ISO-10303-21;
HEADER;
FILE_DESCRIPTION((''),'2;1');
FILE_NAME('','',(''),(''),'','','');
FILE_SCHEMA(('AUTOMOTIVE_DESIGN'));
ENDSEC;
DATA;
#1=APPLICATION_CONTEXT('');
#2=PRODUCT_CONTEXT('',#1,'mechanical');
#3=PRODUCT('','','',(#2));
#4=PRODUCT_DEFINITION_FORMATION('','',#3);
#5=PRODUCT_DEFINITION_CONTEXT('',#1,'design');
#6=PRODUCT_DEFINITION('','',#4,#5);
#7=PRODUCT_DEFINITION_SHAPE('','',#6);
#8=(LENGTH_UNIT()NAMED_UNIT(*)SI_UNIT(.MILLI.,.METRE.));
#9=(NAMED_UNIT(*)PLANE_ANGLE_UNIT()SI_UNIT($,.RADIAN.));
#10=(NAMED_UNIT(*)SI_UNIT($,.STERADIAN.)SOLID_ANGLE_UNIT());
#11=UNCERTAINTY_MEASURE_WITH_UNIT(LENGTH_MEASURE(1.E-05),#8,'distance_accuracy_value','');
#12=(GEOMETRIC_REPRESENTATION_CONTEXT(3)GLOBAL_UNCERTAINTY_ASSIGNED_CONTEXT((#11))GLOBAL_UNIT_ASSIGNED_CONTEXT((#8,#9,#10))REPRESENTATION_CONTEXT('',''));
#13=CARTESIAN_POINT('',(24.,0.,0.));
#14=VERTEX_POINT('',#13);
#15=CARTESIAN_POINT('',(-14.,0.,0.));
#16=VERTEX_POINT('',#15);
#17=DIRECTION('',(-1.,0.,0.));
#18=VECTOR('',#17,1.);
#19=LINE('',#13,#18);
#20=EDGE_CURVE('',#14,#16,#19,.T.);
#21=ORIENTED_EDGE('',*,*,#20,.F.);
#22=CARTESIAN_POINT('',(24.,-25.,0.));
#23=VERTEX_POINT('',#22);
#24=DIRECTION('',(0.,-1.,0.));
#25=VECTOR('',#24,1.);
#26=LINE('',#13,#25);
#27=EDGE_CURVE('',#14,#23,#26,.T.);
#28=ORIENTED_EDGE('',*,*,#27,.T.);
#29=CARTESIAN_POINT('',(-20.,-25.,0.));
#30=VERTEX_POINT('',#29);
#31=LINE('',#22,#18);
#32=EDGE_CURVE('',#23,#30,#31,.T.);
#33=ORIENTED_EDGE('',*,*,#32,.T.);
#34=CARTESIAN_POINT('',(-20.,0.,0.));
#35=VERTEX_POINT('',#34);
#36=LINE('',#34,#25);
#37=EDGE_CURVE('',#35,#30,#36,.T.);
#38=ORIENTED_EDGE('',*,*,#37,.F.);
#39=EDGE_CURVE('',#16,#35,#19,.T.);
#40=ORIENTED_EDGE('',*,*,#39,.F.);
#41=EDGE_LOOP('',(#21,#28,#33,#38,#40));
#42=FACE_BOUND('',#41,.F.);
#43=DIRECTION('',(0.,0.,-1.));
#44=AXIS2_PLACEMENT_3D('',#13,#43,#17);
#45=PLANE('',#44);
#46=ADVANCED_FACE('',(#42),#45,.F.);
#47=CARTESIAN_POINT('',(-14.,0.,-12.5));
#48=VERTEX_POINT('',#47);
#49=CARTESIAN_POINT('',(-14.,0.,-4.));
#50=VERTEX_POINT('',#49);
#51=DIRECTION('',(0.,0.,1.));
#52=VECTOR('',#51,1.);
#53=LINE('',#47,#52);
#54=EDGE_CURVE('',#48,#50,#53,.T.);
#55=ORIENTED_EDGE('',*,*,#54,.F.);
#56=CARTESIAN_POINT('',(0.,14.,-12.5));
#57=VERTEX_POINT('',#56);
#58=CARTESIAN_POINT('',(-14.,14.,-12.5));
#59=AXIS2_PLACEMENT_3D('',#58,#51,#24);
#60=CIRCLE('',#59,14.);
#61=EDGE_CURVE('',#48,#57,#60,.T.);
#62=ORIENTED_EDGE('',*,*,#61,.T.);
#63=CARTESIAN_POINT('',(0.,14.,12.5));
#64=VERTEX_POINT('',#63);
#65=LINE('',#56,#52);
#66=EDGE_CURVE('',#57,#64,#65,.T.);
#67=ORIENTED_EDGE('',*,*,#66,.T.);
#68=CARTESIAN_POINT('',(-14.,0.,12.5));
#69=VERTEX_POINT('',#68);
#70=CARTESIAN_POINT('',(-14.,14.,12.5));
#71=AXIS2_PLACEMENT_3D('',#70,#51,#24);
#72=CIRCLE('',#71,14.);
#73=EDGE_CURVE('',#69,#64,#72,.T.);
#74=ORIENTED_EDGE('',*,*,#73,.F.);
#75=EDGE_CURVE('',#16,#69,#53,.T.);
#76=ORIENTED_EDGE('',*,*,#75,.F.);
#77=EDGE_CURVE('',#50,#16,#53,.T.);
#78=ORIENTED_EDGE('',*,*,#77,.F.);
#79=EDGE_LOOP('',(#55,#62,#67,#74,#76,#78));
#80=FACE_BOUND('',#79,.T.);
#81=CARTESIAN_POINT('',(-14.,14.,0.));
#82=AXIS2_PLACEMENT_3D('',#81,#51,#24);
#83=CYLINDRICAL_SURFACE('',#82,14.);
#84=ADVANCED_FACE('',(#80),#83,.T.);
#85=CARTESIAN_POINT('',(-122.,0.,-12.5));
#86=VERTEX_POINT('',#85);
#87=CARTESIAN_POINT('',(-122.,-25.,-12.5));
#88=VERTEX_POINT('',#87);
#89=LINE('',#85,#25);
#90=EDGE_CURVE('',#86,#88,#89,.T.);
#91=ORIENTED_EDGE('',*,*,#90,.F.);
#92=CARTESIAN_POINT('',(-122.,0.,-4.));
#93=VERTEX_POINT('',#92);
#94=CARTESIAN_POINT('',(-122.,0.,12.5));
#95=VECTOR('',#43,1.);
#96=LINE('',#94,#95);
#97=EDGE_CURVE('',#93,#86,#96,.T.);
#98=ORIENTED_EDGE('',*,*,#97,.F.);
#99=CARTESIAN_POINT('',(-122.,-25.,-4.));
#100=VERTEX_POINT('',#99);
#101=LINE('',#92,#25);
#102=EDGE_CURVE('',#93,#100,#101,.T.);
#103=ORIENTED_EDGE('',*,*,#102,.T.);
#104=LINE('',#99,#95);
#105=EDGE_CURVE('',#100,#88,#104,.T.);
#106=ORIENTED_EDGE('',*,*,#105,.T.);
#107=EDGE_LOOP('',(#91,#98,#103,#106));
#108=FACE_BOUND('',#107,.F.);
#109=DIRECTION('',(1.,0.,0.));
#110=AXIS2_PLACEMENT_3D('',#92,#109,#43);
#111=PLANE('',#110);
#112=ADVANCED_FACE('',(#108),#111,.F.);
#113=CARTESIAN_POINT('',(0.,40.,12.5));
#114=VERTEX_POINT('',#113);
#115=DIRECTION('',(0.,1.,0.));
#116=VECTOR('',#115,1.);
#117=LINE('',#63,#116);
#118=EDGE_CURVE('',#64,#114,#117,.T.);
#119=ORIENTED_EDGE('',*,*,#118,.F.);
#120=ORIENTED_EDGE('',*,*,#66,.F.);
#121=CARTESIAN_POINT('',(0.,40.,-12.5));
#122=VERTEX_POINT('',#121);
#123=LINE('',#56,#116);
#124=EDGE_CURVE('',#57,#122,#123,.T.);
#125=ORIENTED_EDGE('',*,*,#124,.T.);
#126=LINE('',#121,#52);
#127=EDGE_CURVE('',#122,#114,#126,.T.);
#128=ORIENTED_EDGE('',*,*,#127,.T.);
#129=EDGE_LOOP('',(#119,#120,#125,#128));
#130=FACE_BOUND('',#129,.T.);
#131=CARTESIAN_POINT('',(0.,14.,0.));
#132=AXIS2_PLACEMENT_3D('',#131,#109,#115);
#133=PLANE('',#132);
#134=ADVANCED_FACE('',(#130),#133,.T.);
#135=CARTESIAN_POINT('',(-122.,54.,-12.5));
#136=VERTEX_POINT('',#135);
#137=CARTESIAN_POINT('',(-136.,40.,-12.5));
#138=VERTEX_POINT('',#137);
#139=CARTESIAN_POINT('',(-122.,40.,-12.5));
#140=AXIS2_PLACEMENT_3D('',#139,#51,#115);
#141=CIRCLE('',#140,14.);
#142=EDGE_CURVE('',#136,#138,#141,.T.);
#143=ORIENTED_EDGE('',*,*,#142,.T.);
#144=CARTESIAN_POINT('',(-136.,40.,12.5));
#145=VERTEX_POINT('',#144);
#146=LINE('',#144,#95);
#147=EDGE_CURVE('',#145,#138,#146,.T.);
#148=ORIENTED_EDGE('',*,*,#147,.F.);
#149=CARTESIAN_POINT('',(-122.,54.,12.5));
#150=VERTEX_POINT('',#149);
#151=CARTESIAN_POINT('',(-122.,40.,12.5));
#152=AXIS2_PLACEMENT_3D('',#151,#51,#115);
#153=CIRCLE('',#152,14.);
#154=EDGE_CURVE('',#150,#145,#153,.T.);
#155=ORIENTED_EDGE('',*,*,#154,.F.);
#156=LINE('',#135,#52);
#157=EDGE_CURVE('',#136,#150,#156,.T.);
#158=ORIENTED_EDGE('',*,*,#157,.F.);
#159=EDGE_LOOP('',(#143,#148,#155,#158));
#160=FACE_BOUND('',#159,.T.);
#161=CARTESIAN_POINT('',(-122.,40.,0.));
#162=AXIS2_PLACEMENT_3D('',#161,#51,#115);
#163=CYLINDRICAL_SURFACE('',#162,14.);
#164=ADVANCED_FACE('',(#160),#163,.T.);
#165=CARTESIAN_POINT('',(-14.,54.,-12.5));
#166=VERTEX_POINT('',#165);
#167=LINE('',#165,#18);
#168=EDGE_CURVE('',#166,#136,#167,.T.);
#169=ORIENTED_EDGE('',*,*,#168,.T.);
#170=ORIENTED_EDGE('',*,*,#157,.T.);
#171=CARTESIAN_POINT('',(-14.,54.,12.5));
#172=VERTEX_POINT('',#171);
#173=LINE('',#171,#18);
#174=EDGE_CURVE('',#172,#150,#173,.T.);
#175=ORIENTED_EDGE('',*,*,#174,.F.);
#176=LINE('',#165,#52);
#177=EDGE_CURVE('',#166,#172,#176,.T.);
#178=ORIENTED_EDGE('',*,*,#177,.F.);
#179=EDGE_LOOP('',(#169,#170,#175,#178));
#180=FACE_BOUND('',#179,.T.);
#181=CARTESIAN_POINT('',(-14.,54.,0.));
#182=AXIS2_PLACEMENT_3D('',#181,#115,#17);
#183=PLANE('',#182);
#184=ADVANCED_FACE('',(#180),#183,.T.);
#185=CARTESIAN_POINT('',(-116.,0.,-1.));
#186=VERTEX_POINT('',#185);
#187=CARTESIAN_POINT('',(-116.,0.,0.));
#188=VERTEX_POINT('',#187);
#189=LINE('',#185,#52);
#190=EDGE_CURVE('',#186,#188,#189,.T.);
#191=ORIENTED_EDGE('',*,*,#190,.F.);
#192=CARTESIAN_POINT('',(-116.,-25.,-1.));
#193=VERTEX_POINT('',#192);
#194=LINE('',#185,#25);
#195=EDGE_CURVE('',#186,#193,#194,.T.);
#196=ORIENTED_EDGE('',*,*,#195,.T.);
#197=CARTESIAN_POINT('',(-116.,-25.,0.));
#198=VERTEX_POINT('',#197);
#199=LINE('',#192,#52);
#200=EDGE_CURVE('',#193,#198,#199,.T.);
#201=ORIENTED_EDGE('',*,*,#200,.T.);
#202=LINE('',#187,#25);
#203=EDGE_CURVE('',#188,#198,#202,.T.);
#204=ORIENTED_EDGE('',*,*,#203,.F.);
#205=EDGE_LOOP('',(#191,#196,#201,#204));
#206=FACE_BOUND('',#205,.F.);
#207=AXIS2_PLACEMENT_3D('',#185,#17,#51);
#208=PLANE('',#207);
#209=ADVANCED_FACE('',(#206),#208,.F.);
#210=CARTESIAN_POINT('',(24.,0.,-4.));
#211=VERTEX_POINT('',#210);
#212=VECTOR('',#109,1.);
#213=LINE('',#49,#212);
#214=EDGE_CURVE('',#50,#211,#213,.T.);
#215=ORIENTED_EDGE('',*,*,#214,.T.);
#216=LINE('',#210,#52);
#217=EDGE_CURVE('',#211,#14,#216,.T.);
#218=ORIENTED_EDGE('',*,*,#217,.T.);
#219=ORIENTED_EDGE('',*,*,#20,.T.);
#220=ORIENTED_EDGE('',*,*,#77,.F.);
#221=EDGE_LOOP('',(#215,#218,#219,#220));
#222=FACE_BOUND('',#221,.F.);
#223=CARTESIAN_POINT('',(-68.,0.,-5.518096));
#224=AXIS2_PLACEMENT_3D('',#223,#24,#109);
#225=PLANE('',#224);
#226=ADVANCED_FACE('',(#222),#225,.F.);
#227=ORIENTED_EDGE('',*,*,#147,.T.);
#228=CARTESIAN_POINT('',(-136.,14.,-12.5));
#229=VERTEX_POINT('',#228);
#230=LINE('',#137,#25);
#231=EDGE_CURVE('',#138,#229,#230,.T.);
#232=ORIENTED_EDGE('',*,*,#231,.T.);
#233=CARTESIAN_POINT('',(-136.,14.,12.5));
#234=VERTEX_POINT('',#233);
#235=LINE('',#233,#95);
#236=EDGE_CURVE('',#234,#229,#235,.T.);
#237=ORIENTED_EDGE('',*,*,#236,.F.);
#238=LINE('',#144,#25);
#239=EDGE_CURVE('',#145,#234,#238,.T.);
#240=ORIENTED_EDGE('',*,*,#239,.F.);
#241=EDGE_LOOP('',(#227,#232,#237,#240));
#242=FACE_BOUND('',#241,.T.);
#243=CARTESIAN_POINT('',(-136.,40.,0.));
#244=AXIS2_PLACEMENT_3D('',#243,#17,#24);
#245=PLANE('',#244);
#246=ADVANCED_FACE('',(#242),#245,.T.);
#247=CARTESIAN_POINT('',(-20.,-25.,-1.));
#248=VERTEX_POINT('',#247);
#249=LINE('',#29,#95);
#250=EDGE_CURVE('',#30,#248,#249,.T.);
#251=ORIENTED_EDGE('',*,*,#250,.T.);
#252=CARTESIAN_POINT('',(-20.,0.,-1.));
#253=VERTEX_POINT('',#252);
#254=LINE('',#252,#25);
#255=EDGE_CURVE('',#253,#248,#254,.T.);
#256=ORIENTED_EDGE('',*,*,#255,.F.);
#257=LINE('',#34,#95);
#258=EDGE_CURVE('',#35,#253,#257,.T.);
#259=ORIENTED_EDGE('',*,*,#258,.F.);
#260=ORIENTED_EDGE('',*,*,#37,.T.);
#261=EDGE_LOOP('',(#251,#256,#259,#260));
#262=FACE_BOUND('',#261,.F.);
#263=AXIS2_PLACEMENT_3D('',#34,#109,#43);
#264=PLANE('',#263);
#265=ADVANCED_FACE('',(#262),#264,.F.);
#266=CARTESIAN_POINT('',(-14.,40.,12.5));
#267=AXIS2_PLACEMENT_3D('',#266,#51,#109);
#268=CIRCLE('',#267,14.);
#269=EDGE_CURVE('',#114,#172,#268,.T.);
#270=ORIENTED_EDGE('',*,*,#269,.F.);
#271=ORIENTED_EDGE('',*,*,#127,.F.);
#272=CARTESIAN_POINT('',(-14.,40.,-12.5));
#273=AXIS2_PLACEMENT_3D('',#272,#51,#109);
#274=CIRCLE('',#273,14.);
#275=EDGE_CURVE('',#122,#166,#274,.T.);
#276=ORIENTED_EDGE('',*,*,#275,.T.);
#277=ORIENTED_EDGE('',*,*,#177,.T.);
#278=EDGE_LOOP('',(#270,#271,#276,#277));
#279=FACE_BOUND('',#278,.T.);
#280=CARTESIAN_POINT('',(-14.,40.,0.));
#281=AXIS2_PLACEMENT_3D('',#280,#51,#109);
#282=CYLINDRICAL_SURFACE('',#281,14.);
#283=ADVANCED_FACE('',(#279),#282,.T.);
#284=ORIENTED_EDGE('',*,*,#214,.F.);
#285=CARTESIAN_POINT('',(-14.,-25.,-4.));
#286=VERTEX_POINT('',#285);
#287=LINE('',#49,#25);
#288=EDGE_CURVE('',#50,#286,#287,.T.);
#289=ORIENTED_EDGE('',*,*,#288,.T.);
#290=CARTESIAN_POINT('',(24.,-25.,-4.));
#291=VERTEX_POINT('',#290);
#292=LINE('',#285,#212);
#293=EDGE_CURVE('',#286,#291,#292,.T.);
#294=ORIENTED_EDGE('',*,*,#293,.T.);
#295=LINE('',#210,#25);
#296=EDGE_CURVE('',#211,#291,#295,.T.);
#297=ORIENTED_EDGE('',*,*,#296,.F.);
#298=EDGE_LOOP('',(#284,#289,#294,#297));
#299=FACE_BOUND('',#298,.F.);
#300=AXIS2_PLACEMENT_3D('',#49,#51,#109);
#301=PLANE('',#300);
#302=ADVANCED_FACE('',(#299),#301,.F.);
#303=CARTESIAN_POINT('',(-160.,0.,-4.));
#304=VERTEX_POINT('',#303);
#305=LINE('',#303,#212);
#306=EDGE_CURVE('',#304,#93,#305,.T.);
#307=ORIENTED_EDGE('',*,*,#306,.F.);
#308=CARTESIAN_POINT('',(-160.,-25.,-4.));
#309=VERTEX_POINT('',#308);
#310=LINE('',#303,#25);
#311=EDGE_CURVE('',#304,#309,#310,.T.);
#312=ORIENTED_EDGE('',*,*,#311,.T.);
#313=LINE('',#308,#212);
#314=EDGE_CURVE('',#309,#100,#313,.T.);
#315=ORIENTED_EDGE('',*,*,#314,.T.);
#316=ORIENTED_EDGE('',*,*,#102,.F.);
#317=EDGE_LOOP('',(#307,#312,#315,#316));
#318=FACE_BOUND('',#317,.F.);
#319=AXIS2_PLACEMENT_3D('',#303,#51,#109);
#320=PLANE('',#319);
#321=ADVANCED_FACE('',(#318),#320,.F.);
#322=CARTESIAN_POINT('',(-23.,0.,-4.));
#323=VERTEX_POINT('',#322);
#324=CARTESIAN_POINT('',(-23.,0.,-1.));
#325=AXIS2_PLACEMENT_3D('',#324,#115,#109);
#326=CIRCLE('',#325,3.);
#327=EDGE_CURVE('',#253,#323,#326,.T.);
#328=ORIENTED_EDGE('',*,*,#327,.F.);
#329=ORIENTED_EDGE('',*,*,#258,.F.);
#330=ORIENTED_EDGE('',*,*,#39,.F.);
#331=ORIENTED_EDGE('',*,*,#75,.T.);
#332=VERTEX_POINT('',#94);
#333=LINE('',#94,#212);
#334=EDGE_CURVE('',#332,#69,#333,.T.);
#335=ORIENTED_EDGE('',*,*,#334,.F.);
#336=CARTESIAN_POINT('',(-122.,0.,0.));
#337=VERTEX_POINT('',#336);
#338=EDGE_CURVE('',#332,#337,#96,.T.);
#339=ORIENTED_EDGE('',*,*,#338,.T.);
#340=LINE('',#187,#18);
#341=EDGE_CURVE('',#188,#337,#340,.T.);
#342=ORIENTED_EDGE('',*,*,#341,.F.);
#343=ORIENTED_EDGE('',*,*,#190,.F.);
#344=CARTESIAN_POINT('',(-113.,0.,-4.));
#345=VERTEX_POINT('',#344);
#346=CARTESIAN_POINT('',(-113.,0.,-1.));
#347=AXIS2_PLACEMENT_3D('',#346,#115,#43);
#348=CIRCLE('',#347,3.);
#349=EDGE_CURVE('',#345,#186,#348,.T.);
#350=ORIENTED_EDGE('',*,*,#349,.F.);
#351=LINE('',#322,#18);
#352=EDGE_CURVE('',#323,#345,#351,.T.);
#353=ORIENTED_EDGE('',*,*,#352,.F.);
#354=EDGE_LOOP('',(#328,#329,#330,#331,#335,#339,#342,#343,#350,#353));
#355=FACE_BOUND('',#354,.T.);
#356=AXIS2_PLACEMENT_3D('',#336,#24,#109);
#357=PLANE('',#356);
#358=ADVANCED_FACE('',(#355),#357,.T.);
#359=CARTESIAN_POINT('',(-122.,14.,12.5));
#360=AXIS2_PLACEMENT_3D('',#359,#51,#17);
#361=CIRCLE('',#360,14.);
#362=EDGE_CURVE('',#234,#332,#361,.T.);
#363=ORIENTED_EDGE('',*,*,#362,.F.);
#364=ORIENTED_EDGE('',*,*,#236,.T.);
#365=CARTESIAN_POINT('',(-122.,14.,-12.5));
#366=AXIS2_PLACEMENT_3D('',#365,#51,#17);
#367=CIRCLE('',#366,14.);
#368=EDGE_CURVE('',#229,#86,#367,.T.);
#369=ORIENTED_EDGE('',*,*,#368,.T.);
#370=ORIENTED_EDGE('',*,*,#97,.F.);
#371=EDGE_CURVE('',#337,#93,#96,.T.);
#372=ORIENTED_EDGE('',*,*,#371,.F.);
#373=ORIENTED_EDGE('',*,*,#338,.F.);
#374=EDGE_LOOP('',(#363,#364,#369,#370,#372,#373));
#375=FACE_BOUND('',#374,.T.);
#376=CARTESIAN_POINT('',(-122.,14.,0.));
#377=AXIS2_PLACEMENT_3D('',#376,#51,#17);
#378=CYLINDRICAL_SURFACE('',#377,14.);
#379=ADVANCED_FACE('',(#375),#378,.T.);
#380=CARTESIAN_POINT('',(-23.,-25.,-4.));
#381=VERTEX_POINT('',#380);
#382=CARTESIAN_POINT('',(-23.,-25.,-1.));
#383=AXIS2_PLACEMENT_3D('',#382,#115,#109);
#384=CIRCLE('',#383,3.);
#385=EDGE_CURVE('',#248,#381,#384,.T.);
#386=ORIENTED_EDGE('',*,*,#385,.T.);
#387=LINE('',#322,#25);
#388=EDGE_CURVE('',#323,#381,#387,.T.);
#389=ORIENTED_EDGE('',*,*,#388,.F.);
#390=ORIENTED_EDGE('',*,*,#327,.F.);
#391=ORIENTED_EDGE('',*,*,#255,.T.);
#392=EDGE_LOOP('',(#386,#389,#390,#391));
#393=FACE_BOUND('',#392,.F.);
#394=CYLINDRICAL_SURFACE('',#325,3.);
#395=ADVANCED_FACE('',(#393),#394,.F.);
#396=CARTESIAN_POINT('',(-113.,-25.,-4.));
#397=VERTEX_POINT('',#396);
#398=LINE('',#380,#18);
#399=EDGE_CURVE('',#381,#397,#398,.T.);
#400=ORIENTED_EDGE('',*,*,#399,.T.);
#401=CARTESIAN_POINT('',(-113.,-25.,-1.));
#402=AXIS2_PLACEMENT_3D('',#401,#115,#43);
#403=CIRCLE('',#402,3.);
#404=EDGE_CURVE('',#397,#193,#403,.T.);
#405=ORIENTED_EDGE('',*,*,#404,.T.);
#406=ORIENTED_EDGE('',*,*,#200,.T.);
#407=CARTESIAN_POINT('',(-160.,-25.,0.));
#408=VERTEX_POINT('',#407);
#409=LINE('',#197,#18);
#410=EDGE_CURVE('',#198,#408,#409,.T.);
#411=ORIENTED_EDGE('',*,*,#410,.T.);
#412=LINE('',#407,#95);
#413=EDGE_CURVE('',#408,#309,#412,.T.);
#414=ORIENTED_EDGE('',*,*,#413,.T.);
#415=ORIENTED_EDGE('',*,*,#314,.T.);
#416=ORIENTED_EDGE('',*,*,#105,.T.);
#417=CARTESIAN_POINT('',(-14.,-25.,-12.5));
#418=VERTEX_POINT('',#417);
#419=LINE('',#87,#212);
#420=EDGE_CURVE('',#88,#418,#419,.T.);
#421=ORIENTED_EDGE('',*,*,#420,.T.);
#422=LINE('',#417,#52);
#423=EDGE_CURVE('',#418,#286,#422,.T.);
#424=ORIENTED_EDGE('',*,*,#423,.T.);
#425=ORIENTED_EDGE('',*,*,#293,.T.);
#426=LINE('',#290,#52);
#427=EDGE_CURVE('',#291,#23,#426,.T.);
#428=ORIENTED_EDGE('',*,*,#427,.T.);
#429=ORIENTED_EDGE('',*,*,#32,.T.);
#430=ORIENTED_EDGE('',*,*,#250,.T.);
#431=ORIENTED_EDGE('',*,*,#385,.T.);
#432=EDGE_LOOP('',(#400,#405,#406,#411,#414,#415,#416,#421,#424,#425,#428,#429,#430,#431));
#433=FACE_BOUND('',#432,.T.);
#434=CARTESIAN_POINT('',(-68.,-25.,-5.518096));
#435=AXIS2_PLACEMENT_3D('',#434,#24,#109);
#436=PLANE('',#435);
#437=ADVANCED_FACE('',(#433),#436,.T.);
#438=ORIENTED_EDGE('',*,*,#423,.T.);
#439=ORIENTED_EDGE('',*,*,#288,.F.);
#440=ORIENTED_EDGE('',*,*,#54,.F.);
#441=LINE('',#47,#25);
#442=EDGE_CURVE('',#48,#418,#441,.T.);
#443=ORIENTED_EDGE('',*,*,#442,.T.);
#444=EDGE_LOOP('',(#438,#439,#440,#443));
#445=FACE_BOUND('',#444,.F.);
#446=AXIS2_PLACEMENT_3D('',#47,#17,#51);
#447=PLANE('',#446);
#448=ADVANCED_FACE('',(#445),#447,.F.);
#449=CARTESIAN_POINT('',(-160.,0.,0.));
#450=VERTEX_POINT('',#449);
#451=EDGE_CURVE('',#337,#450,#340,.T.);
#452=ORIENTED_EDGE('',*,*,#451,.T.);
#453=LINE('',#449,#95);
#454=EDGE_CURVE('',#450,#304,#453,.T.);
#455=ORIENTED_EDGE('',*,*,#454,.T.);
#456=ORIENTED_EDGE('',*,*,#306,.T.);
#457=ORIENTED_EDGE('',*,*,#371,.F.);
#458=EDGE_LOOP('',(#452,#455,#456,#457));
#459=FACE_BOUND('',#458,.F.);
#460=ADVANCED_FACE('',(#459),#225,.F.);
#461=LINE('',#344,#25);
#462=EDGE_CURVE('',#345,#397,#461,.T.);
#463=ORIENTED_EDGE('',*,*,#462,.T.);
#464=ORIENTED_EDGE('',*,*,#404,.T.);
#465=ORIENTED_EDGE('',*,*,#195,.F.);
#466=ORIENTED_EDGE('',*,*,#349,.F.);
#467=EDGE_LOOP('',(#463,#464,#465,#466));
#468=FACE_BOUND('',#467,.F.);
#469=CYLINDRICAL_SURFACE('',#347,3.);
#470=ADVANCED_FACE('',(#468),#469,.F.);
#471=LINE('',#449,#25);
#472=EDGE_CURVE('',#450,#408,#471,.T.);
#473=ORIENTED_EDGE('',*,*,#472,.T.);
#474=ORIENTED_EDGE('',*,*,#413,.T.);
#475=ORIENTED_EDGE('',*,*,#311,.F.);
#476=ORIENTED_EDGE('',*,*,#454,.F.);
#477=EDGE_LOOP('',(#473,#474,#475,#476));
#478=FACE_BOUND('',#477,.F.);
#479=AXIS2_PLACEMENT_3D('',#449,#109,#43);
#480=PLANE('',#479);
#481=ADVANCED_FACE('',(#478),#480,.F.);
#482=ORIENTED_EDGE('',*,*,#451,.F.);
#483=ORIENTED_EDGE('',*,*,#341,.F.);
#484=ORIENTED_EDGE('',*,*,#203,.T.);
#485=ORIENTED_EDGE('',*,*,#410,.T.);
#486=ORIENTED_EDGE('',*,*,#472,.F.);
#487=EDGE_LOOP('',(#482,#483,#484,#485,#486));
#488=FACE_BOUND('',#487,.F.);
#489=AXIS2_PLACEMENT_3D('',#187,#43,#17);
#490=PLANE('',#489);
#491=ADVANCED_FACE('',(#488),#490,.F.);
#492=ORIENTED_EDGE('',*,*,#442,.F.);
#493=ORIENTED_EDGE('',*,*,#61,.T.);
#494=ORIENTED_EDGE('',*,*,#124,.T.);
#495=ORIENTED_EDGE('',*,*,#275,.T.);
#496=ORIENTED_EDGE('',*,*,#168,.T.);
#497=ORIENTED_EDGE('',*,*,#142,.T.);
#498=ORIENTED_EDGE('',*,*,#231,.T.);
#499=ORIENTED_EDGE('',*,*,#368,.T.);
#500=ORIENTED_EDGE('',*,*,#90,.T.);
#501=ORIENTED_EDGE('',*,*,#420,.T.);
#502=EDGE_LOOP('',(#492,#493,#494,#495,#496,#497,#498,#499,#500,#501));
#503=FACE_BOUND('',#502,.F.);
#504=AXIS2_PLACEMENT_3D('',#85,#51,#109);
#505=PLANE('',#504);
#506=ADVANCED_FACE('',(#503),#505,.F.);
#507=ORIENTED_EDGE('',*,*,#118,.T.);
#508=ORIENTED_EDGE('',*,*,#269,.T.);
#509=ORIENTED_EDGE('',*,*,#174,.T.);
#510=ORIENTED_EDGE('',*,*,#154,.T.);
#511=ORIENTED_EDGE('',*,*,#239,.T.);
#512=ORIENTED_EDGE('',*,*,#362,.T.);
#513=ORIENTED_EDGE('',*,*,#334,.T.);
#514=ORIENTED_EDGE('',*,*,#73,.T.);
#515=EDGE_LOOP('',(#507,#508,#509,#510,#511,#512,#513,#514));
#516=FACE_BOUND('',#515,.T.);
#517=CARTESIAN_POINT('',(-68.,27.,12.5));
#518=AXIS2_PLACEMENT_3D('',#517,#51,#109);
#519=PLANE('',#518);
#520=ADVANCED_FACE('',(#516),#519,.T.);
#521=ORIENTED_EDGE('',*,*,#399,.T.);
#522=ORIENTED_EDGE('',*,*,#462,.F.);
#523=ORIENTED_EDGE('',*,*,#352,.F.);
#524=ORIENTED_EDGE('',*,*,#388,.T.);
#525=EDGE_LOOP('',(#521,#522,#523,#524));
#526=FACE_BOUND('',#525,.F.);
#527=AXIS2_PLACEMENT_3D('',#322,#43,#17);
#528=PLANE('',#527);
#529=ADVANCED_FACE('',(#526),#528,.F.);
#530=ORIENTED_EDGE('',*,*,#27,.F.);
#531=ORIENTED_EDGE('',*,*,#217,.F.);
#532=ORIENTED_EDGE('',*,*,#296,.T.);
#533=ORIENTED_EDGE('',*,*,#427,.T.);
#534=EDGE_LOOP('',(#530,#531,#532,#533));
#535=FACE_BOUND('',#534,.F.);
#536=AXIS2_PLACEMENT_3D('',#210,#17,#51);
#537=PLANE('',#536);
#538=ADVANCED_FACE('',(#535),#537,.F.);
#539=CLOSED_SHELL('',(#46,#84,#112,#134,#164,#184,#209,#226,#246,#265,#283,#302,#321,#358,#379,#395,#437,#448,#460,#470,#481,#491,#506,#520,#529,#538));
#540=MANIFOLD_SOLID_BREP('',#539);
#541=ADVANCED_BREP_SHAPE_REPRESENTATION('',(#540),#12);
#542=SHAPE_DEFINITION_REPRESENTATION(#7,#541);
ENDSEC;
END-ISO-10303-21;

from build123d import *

# Parameters (mm, degrees)
F1_DEPTH = 12.5
F5_DEPTH = 25


# Not quite as in the source:
# - the program builds the solid bodies; features that only make, move or delete a surface that nothing else refers to are left out


with BuildPart() as f1:
    # F0 (on Top) → F1 (new body, symmetric)
    with BuildSketch(Plane.XY):
        with BuildLine():
            Line((-122, 0), (-14, 0))
            ThreePointArc((-14, 0), (-4.1005050634, 4.1005050634), (0, 14))
            Line((0, 14), (0, 40))
            ThreePointArc((0, 40), (-4.1005050634, 49.8994949366), (-14, 54))
            Line((-14, 54), (-122, 54))
            ThreePointArc((-122, 54), (-131.8994949366, 49.8994949366), (-136, 40))
            Line((-136, 40), (-136, 14))
            ThreePointArc((-136, 14), (-131.8994949366, 4.1005050634), (-122, 0))
        make_face()
    extrude(amount=F1_DEPTH, both=True)

    # F4 (on face) → F5 (join)
    with BuildSketch(Plane.XZ):
        with BuildLine():
            Line((-122, -4), (-122, -12.5))
            Line((-122, -12.5), (-14, -12.5))
            Line((-14, -12.5), (-14, -4))
            Line((-14, -4), (24, -4))
            Line((24, -4), (24, 0))
            Line((24, 0), (-20, 0))
            Line((-20, 0), (-20, -1))
            ThreePointArc((-20, -1), (-20.8786796564, -3.1213203436), (-23, -4))
            Line((-23, -4), (-113, -4))
            ThreePointArc((-113, -4), (-115.1213203436, -3.1213203436), (-116, -1))
            Line((-116, -1), (-116, 0))
            Line((-116, 0), (-160, 0))
            Line((-160, 0), (-160, -4))
            Line((-160, -4), (-122, -4))
        make_face()
    extrude(amount=F5_DEPTH)


solid = f1.part
